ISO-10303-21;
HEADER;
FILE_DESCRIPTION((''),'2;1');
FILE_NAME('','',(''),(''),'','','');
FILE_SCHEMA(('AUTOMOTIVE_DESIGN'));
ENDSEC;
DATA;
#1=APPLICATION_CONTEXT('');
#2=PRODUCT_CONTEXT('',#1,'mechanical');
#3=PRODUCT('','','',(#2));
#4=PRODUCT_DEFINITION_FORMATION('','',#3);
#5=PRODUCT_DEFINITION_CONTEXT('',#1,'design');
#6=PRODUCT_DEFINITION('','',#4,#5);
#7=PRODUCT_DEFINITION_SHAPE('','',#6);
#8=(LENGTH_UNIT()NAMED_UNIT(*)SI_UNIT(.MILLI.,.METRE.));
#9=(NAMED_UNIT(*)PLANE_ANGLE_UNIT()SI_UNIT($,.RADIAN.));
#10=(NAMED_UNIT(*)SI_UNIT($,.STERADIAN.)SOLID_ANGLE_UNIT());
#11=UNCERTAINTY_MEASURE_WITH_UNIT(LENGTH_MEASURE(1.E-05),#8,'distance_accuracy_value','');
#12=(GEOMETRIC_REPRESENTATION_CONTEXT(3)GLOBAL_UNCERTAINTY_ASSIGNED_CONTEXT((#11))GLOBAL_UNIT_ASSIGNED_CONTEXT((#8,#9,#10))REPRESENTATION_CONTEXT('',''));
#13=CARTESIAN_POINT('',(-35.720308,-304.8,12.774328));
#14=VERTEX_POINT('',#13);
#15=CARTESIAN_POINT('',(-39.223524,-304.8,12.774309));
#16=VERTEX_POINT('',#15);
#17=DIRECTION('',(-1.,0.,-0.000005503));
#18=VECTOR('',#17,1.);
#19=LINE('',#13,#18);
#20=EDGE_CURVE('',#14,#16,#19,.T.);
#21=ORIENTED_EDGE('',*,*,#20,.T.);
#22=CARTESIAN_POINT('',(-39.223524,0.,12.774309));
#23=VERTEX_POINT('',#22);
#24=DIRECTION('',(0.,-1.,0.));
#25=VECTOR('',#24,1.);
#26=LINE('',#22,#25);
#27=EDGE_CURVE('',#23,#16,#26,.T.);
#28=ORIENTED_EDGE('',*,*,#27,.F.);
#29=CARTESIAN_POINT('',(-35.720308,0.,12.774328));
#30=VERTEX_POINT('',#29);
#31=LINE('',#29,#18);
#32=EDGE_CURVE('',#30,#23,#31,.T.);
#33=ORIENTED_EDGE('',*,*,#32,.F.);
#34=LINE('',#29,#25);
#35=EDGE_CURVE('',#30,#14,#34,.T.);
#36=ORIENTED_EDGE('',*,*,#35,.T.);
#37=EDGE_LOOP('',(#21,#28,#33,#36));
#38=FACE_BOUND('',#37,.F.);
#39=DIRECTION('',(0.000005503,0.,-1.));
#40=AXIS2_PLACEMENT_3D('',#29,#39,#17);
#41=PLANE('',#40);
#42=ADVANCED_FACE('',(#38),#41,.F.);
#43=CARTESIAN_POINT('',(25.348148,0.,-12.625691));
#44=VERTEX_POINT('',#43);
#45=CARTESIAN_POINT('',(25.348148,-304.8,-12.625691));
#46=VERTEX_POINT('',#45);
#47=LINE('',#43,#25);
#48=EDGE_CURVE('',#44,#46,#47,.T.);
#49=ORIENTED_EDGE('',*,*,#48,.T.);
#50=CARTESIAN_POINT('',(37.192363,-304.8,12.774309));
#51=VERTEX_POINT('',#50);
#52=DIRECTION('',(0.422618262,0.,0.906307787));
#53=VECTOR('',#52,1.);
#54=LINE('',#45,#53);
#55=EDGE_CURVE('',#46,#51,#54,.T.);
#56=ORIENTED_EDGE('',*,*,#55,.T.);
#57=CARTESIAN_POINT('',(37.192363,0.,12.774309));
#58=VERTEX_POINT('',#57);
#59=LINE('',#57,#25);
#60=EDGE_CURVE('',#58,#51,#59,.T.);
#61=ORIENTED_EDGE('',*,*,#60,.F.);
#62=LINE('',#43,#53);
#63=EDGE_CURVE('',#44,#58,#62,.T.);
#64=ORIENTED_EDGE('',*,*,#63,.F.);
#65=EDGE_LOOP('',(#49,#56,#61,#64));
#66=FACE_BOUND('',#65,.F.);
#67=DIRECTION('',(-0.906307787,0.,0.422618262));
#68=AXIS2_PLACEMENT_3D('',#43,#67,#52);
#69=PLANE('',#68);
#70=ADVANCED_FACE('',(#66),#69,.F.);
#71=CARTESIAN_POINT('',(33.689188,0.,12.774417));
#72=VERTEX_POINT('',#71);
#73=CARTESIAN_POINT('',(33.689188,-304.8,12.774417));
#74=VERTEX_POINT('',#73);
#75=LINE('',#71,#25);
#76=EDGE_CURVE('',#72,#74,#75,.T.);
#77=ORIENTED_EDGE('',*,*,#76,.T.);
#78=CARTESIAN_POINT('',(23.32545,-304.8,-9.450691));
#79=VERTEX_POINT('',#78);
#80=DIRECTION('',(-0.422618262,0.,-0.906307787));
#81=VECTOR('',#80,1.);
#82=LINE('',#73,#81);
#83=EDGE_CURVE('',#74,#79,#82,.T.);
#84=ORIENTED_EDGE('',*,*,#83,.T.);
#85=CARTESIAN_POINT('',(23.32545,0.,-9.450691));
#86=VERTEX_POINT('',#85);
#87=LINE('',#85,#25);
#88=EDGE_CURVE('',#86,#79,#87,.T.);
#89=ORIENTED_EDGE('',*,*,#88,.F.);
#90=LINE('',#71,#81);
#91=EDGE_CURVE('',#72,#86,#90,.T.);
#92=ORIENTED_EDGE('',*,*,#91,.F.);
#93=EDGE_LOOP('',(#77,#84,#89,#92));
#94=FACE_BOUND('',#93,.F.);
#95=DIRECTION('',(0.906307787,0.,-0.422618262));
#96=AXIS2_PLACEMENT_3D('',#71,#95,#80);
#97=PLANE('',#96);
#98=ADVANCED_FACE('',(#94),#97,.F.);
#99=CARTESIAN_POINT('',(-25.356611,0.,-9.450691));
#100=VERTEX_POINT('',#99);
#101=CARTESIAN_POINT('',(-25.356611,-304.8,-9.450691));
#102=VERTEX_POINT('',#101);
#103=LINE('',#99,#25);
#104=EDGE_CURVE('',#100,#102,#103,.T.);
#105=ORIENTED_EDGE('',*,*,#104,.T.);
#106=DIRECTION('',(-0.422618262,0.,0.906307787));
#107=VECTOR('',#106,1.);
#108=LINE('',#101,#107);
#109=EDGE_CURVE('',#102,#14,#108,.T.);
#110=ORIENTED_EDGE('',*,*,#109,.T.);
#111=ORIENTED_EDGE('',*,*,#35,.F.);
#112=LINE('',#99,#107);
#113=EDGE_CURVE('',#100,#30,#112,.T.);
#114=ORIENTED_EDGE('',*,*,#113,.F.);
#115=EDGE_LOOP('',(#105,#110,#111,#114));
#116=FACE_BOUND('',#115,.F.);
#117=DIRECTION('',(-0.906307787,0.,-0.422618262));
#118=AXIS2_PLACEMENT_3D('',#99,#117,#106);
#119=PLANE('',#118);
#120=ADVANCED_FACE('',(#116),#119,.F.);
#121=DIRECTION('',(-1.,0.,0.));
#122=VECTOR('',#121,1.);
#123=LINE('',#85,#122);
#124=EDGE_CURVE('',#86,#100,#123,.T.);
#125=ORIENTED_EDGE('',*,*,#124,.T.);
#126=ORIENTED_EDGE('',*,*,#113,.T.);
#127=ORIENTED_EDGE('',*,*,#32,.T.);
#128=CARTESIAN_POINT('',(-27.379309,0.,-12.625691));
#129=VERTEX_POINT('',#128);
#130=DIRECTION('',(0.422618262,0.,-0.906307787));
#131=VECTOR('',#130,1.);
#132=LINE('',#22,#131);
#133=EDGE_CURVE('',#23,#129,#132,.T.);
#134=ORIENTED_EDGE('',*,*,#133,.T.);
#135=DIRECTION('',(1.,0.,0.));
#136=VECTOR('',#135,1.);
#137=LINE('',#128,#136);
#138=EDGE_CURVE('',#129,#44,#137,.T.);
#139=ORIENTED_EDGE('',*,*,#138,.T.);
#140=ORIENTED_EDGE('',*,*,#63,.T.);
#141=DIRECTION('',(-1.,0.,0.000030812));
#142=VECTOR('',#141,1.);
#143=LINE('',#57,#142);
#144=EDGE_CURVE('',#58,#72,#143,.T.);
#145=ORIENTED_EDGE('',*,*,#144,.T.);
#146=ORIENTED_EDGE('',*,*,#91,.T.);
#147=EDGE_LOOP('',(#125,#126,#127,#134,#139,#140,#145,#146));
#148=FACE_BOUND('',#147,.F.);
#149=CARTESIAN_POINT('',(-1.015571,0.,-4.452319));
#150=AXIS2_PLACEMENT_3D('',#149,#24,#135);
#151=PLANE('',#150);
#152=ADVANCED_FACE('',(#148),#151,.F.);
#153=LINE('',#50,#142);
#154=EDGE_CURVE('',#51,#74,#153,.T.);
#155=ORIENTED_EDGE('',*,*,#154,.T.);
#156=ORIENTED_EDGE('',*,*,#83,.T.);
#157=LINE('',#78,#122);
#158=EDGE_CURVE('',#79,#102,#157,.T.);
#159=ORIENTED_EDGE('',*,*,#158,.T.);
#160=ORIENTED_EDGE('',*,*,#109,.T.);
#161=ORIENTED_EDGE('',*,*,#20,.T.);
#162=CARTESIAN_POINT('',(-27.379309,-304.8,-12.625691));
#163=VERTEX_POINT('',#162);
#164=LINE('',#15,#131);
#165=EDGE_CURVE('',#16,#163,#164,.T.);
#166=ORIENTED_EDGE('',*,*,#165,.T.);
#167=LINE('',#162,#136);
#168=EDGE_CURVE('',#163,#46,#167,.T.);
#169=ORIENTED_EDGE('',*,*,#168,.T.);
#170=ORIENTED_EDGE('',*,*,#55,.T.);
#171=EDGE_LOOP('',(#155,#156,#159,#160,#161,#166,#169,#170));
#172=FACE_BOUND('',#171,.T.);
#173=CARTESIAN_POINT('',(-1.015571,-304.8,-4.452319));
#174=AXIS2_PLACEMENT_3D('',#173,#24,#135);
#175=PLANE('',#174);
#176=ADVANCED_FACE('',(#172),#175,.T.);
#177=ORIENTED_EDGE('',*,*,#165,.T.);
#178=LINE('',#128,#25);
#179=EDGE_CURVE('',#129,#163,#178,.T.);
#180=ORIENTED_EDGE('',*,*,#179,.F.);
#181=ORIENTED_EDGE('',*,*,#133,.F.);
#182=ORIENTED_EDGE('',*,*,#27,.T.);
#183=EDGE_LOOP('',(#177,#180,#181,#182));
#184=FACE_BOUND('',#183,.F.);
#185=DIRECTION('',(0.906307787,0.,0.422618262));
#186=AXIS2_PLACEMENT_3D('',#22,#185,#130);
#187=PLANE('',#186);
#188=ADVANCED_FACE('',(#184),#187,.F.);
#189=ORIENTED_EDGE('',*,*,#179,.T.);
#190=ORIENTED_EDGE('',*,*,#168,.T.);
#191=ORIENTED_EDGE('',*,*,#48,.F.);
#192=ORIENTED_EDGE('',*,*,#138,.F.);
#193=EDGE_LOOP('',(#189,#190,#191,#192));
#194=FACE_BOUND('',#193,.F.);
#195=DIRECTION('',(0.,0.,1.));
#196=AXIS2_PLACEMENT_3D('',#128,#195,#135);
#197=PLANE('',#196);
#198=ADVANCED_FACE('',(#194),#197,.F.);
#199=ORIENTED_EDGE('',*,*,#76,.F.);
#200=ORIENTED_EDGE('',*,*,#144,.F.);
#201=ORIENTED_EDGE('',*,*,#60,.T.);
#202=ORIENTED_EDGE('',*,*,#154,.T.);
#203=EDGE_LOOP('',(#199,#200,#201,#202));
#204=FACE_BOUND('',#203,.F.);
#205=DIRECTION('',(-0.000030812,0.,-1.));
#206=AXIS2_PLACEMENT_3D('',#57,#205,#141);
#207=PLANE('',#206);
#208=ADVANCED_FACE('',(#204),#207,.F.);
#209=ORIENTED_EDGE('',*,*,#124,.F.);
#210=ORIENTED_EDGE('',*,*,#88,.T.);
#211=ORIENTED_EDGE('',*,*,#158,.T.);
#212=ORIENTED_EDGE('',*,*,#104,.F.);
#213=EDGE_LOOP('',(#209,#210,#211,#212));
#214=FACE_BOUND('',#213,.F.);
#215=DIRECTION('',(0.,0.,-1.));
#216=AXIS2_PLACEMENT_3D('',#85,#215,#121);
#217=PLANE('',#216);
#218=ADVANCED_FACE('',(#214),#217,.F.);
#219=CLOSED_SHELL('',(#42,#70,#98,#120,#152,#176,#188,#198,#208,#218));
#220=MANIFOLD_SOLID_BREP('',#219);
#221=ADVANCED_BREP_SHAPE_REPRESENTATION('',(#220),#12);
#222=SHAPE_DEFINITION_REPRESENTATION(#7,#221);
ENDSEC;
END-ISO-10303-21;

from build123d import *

# Parameters (mm, degrees)
F1_DEPTH = 304.8


# Not quite as in the source:
# - ends of sketch curves that miss each other by under 0.0002 mm in the source are joined


with BuildPart() as f1:
    # F0 (on Front) → F1 (new body)
    with BuildSketch(Plane.XZ):
        Polygon((-39.22352381, 12.7743089993), (-27.3793092929, -12.6256910007), (25.3481481273, -12.6256910007), (37.1923626445, 12.7743089993), (33.6891880845, 12.7744169383), (23.3254500493, -9.4506910007), (-25.3566112148, -9.4506910007), (-35.7203079071, 12.7743282779), align=None)
    extrude(amount=F1_DEPTH)


solid = f1.part
